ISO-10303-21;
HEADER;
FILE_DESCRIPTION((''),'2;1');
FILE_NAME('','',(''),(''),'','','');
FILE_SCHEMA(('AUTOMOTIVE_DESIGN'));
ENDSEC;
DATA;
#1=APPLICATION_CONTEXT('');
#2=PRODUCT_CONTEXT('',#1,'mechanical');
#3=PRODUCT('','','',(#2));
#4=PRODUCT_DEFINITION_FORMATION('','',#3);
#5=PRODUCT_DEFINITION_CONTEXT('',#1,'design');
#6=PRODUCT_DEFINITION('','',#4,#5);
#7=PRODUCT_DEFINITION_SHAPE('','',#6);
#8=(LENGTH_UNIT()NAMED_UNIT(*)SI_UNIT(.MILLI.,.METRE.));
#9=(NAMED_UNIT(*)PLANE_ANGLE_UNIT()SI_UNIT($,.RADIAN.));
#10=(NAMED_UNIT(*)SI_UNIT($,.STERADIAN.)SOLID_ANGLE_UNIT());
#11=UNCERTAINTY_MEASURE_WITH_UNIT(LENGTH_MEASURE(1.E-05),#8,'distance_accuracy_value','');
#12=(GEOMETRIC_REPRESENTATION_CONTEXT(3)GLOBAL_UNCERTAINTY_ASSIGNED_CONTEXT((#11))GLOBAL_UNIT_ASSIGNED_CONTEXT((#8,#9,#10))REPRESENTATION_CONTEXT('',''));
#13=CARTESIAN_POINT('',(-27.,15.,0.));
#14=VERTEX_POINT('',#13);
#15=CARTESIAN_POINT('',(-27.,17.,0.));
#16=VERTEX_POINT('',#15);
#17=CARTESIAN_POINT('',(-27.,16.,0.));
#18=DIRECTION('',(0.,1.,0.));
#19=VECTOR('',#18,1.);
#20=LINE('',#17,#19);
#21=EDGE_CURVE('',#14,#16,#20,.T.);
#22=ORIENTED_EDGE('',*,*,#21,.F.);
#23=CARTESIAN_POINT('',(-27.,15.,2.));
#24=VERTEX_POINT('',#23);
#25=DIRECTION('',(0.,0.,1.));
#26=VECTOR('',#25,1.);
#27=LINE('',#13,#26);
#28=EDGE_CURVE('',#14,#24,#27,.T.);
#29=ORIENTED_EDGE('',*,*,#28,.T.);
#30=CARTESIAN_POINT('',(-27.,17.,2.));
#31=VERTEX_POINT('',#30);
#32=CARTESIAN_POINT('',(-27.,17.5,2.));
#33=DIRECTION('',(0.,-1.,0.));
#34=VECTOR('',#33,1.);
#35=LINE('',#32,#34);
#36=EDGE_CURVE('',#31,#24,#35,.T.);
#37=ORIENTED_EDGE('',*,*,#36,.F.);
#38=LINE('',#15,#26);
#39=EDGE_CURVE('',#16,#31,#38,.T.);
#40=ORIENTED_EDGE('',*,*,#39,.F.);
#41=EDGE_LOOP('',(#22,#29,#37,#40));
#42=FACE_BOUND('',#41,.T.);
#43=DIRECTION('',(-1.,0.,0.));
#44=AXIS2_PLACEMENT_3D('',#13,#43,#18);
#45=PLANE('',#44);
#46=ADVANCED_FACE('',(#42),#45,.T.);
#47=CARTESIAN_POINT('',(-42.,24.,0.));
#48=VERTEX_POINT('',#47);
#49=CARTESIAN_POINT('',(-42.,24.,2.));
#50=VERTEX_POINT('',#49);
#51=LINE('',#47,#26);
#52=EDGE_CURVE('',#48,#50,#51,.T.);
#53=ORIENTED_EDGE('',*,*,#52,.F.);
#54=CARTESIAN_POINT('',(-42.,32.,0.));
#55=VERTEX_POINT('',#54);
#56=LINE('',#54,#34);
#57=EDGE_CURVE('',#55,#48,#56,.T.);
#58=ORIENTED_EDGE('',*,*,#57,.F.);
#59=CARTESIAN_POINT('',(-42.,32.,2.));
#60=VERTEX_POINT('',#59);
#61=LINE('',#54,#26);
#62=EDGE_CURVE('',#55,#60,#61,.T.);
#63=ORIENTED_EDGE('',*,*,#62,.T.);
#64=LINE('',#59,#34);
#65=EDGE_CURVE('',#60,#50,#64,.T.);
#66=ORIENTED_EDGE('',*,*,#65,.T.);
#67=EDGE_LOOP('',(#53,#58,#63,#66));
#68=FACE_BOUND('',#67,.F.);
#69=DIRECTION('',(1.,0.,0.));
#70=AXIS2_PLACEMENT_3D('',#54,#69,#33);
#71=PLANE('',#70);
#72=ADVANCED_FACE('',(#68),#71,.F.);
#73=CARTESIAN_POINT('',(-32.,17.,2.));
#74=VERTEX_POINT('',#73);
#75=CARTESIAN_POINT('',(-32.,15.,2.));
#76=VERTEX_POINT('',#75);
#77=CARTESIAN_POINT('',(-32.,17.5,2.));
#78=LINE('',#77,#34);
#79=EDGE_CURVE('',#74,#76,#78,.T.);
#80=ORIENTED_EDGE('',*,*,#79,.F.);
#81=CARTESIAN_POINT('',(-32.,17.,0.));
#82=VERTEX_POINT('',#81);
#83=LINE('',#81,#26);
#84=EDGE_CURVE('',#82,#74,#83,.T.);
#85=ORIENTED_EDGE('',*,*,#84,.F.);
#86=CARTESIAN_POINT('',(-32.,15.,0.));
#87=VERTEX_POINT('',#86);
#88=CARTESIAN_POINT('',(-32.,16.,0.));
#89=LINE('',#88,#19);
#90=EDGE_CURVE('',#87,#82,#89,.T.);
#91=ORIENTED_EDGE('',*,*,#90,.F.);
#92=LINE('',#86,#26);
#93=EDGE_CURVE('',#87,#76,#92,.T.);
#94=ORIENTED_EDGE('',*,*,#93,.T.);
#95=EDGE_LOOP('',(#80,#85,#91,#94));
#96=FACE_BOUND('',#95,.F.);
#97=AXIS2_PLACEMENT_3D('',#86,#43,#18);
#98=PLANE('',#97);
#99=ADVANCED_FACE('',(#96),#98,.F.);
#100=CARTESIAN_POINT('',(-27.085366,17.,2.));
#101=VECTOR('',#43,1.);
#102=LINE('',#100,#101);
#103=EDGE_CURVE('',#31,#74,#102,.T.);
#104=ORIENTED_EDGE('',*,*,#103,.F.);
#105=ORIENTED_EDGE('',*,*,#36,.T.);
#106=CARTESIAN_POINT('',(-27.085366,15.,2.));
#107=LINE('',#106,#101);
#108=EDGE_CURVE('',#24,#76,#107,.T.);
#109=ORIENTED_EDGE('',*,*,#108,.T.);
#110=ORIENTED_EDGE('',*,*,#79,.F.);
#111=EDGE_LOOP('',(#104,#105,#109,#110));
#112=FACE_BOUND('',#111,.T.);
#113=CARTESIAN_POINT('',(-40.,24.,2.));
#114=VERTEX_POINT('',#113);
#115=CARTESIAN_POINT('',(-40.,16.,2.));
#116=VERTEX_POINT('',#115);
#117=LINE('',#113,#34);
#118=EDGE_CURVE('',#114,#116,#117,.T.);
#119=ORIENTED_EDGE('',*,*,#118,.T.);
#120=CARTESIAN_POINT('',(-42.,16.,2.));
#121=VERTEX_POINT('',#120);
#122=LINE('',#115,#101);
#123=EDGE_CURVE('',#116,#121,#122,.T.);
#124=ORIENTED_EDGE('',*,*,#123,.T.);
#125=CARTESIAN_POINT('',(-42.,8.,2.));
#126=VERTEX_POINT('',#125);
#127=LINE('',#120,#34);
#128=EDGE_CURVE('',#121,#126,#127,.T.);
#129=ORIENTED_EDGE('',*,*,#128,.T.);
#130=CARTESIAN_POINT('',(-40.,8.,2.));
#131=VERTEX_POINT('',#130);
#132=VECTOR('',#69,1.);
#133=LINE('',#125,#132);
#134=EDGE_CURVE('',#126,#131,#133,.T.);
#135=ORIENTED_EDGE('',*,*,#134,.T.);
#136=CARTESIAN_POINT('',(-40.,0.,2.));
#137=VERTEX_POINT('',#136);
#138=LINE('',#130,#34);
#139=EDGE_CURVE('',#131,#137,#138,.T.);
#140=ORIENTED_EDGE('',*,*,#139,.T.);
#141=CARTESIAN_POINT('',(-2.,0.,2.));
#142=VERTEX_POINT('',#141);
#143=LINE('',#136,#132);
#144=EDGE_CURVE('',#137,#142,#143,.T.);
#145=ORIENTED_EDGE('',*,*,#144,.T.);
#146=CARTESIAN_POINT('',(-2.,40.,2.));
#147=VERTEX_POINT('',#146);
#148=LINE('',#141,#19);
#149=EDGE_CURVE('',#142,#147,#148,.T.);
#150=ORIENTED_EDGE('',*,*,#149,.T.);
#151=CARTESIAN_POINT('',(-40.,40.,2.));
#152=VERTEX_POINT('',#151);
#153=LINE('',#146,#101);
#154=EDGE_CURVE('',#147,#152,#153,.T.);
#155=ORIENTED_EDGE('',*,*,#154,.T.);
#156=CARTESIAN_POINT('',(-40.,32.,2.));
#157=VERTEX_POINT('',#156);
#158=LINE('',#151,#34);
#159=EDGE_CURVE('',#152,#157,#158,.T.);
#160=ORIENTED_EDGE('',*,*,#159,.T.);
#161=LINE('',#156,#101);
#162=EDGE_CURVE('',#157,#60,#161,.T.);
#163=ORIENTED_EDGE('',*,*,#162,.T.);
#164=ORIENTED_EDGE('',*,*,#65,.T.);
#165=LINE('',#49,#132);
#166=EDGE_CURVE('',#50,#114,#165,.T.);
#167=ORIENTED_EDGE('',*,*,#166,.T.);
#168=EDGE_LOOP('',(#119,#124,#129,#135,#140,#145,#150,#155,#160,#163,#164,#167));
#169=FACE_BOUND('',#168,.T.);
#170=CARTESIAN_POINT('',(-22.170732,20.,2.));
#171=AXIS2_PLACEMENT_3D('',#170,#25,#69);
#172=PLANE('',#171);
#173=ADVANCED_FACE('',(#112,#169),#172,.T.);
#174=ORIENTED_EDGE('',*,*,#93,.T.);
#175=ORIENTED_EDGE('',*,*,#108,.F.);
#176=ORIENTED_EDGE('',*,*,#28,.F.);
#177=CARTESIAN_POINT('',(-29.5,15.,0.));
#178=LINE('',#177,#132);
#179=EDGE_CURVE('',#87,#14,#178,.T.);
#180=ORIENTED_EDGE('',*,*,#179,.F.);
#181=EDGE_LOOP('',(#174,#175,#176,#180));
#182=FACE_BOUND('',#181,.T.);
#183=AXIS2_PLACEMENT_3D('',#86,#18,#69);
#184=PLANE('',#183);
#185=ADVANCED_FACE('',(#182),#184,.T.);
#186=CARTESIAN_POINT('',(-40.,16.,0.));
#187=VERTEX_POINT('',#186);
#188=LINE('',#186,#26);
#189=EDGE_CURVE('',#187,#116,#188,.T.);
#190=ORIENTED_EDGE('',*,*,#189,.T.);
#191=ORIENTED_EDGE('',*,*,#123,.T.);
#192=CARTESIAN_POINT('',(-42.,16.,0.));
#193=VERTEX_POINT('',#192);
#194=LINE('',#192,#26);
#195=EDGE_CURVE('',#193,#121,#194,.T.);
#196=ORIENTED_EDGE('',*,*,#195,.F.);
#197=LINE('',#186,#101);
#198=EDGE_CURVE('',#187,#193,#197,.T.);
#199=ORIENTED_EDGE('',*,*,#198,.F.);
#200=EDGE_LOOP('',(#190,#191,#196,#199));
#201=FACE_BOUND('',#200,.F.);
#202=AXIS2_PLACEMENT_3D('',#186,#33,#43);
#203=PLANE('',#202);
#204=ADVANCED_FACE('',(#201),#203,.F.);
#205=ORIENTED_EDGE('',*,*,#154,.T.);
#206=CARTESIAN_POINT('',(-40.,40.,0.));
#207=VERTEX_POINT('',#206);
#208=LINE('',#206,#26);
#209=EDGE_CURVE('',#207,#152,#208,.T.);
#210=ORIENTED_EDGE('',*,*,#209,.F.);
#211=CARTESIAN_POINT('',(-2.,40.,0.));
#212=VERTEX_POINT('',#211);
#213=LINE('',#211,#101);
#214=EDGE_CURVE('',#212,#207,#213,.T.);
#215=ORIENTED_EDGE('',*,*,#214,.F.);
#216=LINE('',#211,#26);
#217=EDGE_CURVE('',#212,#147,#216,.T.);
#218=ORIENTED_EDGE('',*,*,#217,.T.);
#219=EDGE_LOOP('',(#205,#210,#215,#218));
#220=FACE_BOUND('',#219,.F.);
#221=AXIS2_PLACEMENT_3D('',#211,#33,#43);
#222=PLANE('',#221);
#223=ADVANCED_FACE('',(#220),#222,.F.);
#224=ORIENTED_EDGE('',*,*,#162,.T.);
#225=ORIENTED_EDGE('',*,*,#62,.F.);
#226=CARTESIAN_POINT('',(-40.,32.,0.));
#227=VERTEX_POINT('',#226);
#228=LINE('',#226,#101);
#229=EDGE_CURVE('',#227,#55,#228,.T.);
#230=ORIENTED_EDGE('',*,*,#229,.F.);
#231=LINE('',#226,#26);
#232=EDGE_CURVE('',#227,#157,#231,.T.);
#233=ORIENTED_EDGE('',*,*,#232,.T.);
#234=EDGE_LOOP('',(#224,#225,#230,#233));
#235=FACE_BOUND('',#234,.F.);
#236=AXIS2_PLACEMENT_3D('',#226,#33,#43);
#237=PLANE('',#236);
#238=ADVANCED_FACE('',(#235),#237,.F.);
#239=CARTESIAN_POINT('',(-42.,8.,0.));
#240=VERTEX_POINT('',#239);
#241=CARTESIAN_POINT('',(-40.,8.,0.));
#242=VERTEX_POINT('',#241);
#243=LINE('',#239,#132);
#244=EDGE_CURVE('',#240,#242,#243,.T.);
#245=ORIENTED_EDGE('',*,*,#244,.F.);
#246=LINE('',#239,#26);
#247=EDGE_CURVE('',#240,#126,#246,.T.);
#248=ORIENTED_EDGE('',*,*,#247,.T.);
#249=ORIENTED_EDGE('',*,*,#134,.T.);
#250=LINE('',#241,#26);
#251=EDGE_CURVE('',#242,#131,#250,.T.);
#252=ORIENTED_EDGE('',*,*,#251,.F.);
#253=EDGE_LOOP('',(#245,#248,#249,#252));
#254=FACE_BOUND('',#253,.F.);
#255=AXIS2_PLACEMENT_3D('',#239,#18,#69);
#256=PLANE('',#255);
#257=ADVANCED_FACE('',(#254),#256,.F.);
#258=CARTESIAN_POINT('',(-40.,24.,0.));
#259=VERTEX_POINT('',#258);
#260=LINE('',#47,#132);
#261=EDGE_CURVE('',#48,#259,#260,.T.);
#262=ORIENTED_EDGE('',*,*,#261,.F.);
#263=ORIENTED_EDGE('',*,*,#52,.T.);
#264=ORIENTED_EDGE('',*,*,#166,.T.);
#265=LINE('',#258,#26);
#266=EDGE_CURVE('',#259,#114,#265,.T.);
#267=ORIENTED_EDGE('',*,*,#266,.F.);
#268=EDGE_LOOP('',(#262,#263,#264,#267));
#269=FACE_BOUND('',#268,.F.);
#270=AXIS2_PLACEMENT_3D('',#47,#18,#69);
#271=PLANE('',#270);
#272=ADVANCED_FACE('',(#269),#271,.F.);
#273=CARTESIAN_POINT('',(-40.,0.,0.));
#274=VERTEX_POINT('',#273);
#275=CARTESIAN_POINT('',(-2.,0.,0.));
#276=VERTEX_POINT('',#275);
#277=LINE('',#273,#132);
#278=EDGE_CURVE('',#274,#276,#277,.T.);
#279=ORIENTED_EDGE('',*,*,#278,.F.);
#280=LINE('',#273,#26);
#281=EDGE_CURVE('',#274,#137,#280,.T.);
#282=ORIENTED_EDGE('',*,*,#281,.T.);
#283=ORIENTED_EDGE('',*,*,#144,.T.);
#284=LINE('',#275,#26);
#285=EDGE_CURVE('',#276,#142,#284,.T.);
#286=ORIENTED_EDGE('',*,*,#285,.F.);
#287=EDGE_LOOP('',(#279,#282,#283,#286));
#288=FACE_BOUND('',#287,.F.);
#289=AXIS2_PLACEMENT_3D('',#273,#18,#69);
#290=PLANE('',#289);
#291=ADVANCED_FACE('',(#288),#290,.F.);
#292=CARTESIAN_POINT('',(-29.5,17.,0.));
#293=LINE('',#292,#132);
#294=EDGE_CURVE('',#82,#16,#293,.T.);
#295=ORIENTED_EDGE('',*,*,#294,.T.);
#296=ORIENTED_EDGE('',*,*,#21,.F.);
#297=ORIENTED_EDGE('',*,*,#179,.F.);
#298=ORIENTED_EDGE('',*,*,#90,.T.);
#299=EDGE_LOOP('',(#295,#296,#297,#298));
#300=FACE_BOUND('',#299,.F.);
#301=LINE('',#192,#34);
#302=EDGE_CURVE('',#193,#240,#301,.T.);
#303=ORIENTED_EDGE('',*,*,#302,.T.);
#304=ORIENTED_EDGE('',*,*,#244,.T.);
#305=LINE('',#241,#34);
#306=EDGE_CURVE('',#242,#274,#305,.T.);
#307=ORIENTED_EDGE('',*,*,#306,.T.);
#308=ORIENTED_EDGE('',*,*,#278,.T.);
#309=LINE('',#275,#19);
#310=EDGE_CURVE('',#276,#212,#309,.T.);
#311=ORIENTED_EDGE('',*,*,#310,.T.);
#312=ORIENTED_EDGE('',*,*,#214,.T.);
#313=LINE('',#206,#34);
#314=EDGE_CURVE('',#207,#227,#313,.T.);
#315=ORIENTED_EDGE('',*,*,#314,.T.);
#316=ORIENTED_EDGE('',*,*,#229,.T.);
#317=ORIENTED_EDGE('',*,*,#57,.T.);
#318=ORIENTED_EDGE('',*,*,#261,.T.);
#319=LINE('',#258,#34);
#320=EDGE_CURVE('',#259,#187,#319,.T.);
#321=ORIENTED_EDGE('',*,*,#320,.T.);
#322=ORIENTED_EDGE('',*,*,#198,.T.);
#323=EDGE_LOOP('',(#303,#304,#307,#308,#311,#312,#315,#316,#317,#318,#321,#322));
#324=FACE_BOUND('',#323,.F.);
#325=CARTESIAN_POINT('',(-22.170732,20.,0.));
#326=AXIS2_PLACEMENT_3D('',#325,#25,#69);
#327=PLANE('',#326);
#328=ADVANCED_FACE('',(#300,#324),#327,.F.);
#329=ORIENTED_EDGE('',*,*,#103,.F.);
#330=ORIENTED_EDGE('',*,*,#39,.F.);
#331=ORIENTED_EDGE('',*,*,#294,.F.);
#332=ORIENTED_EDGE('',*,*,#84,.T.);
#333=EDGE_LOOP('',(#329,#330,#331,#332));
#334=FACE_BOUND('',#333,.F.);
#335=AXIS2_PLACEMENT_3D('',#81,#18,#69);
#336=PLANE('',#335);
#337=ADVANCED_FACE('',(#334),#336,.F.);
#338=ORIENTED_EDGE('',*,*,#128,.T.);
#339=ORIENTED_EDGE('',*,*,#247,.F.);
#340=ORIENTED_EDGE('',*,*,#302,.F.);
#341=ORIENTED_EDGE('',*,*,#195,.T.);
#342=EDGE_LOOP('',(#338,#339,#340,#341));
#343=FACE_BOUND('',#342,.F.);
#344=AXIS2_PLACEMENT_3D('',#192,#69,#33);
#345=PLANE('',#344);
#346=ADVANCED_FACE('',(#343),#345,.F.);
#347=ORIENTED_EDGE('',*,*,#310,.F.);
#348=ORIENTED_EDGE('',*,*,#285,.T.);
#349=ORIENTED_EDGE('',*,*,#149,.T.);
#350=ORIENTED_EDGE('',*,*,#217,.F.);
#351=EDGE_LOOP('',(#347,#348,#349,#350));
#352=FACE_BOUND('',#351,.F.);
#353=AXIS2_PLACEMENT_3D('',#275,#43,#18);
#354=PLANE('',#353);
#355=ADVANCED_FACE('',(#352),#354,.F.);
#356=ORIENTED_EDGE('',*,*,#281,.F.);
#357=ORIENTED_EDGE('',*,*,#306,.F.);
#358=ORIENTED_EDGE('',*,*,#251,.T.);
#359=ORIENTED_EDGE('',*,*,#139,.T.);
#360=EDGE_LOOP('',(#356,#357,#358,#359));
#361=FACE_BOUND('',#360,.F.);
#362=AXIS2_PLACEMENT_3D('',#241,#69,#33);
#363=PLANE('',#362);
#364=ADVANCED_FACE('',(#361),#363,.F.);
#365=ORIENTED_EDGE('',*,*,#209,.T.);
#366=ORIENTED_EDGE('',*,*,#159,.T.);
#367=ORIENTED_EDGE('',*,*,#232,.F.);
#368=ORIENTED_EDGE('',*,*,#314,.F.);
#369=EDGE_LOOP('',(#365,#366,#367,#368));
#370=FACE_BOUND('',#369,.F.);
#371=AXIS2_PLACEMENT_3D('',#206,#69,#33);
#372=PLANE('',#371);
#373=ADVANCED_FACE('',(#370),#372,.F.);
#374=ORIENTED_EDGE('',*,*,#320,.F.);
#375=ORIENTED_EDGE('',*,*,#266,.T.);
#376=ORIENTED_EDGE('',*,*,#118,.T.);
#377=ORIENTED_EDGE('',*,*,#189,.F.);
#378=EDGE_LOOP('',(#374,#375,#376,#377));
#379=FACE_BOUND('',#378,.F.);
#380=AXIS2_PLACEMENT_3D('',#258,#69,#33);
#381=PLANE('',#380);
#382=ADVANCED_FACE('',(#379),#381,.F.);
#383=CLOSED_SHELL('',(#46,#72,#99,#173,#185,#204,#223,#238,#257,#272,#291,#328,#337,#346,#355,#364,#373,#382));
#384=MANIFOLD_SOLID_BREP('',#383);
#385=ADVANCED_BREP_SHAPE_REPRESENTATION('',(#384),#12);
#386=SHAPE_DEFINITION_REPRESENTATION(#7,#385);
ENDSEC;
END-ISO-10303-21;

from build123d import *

# Parameters (mm, degrees)
F0_DEPTH = 2
F1_W     = 5
F1_H     = 2
F2_DEPTH = 25


# Not quite as in the source:
# - a feature names something its author has since deleted; it is built from what else it names


with BuildPart() as f0:
    # F3 (on Top) → F0 (new body)
    with BuildSketch(Plane.XY):
        Polygon((-40, 0), (-2, 0), (-2, 40), (-40, 40), (-40, 32), (-42, 32), (-42, 24), (-40, 24), (-40, 16), (-42, 16), (-42, 8), (-40, 8), align=None)
    extrude(amount=F0_DEPTH)

    # F1 (on Top) → F2 (cut)
    with BuildSketch(Plane.XY):
        with Locations((-29.5, 16)):
            Rectangle(F1_W, F1_H)
    extrude(amount=F2_DEPTH, mode=Mode.SUBTRACT)


solid = f0.part
